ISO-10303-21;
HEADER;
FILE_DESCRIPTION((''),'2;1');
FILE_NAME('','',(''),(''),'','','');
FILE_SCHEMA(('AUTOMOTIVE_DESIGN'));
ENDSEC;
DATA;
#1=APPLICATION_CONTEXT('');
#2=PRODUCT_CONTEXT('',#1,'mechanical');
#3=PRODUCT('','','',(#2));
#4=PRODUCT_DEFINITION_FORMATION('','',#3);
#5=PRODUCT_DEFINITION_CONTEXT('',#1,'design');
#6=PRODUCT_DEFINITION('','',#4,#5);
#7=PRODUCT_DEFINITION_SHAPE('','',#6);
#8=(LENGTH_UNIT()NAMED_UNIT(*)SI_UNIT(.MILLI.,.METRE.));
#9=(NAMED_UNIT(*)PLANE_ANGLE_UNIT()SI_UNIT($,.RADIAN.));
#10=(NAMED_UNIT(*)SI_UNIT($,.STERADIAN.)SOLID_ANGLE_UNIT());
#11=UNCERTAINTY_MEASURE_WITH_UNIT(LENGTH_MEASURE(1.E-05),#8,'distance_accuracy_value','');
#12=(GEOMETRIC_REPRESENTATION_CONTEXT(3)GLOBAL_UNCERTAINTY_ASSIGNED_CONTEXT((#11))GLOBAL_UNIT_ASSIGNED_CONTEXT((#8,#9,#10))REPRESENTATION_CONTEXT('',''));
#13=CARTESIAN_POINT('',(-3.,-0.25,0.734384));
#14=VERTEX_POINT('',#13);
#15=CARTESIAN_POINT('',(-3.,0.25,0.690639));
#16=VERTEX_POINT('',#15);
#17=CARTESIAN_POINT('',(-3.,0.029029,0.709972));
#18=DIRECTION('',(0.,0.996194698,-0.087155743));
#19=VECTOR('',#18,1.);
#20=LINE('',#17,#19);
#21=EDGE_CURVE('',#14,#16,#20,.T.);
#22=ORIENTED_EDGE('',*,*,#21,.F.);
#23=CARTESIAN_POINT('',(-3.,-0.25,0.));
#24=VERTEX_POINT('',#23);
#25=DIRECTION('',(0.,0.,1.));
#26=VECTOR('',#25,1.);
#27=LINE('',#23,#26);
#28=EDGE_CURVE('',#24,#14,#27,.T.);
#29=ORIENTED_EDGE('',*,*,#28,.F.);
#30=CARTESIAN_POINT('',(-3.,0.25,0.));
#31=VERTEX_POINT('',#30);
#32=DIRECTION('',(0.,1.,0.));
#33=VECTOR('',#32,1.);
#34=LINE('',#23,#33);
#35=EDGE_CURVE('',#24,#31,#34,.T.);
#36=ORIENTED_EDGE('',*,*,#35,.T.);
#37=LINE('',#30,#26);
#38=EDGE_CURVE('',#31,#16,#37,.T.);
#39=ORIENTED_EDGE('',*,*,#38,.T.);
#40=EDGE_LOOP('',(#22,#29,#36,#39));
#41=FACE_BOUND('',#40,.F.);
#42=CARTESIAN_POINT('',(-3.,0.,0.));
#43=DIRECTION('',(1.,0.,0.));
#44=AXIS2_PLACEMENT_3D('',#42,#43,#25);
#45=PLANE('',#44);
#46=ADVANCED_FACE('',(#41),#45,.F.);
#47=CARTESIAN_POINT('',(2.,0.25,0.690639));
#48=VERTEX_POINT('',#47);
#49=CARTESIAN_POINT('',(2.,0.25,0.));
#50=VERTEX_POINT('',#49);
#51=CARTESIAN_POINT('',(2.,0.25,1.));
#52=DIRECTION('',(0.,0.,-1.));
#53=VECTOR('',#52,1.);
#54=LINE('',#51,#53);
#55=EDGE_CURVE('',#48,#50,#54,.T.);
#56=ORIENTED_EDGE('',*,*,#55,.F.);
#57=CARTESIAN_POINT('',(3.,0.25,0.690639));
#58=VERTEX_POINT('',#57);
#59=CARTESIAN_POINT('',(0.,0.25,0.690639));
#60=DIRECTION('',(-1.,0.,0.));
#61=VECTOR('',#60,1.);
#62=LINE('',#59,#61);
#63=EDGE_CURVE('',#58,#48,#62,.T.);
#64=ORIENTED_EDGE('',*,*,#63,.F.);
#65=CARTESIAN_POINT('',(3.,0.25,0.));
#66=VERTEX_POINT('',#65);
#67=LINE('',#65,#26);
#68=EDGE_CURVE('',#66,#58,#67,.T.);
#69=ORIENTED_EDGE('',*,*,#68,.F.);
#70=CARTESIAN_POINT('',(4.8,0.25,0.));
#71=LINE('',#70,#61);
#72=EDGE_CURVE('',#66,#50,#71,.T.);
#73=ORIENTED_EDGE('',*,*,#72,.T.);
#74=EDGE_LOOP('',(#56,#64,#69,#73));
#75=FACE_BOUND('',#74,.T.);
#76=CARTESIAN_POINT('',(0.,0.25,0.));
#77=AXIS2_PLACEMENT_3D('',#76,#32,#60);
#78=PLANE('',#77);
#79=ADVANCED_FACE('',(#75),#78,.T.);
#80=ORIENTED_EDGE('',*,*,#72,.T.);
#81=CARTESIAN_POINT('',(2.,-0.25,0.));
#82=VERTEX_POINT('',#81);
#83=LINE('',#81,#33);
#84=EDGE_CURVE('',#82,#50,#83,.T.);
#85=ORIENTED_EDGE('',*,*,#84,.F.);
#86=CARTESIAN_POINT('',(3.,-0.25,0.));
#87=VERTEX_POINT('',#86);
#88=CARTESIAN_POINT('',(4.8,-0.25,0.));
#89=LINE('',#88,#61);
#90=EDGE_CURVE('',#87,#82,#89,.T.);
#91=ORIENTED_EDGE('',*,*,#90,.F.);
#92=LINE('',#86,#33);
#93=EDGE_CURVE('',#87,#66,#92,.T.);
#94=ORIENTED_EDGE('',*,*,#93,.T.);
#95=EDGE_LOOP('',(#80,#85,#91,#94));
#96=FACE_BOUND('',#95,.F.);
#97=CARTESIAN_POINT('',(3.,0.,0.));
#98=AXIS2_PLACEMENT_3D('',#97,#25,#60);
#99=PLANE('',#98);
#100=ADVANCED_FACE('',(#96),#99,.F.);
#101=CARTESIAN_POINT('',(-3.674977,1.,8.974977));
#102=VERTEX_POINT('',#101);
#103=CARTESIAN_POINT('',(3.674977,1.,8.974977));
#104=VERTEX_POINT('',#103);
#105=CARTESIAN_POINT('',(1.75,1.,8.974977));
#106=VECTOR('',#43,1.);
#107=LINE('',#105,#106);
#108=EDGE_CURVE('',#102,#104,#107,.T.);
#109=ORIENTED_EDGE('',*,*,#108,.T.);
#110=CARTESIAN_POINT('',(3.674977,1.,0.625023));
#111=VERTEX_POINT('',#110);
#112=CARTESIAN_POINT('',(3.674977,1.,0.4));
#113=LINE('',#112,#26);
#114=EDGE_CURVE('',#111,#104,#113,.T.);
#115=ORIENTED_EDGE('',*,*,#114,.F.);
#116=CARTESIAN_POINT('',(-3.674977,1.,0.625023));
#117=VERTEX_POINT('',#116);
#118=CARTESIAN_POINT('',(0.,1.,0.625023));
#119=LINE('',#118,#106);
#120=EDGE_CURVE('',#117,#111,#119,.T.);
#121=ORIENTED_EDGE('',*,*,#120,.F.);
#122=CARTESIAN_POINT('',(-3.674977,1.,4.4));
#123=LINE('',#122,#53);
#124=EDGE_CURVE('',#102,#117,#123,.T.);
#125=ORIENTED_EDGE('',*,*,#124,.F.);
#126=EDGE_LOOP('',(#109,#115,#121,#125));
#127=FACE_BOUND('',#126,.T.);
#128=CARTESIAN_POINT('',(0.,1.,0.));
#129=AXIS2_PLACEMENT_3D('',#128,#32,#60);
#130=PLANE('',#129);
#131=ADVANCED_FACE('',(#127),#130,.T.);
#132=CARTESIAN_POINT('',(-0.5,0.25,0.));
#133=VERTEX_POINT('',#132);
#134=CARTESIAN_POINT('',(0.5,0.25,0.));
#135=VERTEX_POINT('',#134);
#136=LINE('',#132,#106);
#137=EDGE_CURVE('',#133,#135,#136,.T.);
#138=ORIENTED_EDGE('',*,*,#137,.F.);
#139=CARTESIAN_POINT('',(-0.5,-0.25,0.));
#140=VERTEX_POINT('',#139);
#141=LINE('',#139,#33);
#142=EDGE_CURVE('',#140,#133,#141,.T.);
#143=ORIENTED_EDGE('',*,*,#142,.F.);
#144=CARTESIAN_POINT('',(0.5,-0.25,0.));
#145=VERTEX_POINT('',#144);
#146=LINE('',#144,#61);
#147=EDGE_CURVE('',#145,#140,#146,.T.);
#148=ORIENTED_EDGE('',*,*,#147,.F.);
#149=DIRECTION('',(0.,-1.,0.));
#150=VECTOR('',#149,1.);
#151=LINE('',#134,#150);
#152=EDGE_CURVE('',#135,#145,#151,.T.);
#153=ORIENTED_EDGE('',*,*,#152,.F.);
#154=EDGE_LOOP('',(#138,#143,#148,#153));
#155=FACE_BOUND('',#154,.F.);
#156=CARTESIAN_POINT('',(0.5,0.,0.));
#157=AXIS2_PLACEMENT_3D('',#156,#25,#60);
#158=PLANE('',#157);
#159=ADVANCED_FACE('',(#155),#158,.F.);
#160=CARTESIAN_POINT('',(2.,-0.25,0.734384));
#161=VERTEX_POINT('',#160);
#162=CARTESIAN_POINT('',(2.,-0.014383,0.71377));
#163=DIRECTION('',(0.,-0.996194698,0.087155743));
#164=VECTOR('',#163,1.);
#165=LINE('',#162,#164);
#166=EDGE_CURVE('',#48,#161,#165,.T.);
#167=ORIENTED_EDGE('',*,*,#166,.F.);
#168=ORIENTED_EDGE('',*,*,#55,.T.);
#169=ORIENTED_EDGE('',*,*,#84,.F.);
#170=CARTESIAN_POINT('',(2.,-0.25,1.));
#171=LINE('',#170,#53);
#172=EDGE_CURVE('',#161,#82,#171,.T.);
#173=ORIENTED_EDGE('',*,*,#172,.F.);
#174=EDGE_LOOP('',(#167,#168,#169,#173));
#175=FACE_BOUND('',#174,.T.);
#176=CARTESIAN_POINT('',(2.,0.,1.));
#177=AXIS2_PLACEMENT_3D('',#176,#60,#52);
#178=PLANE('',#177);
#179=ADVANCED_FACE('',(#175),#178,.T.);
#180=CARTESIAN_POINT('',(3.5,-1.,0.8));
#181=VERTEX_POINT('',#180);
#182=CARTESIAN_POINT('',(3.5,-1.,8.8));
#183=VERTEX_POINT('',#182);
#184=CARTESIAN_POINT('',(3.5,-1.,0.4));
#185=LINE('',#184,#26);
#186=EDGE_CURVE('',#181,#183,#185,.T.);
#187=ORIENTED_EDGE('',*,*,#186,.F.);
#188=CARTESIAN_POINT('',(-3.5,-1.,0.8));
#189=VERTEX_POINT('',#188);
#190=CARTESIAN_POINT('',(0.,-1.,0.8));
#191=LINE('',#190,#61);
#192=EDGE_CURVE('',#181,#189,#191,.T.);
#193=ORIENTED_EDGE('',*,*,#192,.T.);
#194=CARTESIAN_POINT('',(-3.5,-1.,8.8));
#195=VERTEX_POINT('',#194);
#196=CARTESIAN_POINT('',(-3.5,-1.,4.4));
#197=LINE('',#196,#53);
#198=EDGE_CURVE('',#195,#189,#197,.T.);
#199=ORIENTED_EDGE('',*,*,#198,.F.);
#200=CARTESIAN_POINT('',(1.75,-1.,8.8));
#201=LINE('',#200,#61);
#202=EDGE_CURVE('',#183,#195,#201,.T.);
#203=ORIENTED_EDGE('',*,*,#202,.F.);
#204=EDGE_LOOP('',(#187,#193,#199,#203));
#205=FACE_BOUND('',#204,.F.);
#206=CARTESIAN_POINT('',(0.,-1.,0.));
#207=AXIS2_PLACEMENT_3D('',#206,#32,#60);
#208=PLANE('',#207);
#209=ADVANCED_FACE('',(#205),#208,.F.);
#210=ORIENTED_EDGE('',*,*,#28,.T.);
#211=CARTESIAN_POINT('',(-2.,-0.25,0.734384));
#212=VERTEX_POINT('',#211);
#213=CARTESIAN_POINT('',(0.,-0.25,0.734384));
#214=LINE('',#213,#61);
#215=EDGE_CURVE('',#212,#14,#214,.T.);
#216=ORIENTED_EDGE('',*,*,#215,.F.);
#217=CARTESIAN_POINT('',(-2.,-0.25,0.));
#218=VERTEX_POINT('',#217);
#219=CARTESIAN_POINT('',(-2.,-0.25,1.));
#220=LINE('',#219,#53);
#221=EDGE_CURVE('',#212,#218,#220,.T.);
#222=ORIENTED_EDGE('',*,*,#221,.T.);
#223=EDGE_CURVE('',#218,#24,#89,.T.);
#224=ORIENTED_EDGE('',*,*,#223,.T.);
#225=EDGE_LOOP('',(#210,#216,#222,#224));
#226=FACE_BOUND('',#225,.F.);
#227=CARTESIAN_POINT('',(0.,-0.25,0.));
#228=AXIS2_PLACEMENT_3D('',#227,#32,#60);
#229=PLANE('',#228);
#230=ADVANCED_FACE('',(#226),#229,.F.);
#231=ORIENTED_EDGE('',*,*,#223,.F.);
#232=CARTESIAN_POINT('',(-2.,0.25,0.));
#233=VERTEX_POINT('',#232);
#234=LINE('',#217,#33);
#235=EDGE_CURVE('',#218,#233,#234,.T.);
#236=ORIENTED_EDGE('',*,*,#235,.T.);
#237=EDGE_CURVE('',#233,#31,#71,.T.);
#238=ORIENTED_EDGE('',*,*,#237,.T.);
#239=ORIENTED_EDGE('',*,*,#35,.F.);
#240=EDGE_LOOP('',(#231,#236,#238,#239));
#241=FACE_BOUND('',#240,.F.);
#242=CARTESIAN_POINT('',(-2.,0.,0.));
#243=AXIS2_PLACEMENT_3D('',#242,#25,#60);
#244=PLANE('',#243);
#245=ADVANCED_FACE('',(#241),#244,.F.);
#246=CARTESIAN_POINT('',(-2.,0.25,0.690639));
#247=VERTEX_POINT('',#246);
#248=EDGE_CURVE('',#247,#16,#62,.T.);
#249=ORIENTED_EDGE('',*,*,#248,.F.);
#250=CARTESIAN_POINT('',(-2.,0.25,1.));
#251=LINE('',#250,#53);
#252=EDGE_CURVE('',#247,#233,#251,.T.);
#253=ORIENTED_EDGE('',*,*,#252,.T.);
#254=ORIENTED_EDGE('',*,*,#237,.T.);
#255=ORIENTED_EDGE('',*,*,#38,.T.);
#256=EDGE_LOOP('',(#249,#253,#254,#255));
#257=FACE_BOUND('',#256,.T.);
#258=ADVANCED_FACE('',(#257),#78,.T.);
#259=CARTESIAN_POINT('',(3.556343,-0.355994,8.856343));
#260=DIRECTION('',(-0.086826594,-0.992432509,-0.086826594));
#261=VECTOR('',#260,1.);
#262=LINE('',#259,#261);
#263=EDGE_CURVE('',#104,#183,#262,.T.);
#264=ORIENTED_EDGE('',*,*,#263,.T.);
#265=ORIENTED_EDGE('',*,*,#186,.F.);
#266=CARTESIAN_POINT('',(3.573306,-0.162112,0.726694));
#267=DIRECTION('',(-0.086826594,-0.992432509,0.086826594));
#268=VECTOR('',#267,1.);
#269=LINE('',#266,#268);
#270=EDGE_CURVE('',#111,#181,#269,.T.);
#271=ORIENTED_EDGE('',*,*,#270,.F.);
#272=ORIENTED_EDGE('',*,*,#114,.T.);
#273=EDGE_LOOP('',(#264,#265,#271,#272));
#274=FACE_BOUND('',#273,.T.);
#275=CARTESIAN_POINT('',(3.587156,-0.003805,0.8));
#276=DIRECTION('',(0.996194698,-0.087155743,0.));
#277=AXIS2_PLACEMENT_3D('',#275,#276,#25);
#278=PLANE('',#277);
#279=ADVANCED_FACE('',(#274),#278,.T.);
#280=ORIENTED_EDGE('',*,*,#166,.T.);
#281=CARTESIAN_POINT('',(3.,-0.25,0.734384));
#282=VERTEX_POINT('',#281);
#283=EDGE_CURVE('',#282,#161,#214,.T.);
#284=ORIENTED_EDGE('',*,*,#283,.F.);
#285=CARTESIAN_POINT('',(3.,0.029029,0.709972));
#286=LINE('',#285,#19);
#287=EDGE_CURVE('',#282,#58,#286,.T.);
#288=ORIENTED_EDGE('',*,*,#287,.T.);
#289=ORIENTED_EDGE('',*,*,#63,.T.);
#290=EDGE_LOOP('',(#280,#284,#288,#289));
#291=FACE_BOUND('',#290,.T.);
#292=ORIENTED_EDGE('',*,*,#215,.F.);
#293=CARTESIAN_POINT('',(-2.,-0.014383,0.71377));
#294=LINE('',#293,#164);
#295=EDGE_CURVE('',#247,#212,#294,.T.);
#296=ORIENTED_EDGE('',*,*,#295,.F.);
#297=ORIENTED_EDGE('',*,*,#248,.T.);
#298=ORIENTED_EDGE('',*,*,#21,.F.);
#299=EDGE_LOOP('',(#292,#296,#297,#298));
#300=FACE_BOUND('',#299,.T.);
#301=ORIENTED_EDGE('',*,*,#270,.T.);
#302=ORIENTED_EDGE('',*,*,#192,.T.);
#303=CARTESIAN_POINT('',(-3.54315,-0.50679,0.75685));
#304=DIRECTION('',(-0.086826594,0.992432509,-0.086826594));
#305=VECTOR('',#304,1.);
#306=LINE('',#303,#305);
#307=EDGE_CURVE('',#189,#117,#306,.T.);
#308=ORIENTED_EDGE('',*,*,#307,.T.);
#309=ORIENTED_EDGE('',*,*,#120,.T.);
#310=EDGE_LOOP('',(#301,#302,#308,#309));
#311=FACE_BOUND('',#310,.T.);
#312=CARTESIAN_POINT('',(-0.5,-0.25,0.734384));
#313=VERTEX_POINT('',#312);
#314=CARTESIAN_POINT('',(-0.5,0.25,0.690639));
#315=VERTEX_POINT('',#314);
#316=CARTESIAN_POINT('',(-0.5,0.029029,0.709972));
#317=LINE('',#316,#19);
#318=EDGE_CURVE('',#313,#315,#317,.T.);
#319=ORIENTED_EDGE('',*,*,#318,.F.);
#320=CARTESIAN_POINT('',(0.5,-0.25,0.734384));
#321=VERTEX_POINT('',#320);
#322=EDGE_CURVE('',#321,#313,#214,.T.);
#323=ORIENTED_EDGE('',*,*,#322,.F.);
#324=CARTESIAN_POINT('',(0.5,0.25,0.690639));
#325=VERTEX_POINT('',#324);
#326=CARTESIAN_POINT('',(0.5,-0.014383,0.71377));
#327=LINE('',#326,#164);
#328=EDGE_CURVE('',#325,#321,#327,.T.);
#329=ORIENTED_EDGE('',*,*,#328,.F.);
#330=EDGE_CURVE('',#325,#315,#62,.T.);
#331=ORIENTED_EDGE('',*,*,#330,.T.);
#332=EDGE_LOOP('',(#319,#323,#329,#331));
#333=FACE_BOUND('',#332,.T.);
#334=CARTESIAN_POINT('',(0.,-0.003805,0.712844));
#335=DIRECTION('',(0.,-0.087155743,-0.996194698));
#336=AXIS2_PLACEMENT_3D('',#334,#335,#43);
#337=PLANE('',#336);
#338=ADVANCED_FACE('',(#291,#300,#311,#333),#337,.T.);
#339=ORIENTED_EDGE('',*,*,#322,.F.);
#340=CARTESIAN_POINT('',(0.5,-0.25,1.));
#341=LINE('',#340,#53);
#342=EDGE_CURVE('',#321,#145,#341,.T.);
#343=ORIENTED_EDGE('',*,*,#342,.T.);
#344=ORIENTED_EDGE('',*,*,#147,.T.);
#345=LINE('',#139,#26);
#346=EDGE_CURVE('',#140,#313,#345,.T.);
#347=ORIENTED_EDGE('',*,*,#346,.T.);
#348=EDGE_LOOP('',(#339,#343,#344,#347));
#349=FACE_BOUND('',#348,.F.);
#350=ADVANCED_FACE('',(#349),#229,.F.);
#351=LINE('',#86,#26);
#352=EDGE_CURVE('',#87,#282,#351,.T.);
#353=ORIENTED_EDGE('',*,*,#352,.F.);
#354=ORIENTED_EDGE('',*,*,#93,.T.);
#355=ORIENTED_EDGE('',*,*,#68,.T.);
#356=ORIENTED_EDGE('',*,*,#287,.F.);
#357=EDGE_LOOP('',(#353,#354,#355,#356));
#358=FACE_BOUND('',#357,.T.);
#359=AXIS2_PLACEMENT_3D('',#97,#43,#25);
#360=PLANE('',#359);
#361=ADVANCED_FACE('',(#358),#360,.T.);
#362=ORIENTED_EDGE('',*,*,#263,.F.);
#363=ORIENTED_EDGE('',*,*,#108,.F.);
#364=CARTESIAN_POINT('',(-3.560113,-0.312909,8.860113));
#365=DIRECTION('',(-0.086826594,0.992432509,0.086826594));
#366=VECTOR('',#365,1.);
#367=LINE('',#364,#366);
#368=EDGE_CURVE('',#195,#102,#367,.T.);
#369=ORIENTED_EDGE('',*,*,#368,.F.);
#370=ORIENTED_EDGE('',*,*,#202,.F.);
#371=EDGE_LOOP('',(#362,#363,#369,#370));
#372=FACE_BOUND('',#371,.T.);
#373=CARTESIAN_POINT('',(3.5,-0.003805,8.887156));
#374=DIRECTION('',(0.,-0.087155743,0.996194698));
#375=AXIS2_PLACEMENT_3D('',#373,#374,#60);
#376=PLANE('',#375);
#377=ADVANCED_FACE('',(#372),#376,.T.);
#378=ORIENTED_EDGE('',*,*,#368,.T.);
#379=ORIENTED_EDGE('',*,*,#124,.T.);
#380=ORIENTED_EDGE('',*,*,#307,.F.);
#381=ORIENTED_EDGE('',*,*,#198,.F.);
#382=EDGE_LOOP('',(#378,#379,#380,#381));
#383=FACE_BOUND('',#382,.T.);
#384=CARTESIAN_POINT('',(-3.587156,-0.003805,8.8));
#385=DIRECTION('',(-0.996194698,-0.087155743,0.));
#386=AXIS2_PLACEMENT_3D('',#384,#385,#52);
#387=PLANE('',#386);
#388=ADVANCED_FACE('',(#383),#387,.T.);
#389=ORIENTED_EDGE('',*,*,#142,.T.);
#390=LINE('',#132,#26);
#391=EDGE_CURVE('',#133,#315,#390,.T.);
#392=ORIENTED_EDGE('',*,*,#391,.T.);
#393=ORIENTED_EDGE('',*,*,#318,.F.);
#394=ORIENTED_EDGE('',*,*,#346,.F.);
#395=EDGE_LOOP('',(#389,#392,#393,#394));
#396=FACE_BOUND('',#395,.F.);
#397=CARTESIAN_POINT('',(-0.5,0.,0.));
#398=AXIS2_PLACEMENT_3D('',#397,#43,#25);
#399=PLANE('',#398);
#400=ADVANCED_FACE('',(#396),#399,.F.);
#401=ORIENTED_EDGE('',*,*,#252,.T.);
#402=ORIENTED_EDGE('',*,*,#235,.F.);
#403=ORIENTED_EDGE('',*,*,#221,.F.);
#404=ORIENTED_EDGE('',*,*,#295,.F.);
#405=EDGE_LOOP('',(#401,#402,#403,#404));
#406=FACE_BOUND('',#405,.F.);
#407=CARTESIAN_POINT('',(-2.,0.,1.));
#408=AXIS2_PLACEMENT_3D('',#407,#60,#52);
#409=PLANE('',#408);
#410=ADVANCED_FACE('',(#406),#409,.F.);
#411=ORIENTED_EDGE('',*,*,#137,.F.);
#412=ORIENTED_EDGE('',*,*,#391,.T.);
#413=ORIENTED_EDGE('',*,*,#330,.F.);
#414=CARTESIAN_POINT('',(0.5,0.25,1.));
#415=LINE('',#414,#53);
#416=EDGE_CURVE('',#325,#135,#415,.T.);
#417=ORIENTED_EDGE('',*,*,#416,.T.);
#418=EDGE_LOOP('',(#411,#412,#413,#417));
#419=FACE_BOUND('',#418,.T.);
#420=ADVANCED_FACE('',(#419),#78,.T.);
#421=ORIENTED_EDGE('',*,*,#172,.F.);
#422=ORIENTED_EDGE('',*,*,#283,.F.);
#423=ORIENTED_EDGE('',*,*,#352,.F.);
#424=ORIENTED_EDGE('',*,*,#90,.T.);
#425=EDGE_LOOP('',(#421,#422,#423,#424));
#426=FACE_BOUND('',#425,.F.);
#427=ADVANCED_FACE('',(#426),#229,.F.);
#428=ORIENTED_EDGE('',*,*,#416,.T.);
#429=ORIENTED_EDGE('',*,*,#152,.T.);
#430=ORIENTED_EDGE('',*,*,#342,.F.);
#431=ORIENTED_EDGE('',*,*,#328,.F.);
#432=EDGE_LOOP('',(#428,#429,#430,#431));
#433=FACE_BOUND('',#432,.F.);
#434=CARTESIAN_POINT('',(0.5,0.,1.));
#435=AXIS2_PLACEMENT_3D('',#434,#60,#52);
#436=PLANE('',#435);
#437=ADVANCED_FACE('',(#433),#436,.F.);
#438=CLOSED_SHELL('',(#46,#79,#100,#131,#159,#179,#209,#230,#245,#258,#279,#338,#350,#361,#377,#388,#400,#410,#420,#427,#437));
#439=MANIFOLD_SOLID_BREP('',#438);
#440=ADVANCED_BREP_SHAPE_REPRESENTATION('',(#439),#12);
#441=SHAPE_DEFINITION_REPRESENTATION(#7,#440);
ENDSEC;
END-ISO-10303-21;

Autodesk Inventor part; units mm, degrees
ref_plane "YZ Plane" through (0, 0, 0) normal (1, 0, 0) x (0, 1, 0)
ref_plane "XZ Plane" through (0, 0, 0) normal (0, 1, 0) x (-1, 0, 0)
ref_plane "XY Plane" through (0, 0, 0) normal (0, 0, 1) x (1, 0, 0)
sketch "Sketch2" plane through (0, 0, 0) normal (0, 1, 0) x (-1, 0, 0)
  line L0 (0, -0.1) -> (0, 1.3) projected
  line L1 (-4.8, 0) -> (3.6, 0) projected
  line L2 (-0.5, 0) -> (0.5, 0)
  line L3 (0.5, 0) -> (0.5, 1)
  line L4 (0.5, 1) -> (-0.5, 1)
  line L5 (-0.5, 1) -> (-0.5, 0)
  line L6 (2, 0) -> (3, 0)
  line L7 (3, 0) -> (3, 1)
  line L8 (3, 1) -> (2, 1)
  line L9 (2, 1) -> (2, 0)
  line L10 (-2, 0) -> (-3, 0)
  line L11 (-3, 0) -> (-3, 1)
  line L12 (-3, 1) -> (-2, 1)
  line L13 (-2, 1) -> (-2, 0)
  dimension "d0" = 6
  dimension "d1" = 1
  dimension "d2" = 1
extrude "Extrusion1" add sketch "Sketch2" along normal mid plane 0.5
sketch "Sketch3" plane through (0, 0, 0) normal (0, 1, 0) x (-1, 0, 0)
  line L0 (0, -1.18) -> (0, 15.34) projected
  line L1 (-0.5, 1) -> (0.5, 1) projected
  line L2 (-3.5, 8.8) -> (3.5, 8.8)
  line L3 (3.5, 8.8) -> (3.5, 0.8)
  line L4 (3.5, 0.8) -> (-3.5, 0.8)
  line L5 (-3.5, 0.8) -> (-3.5, 8.8)
  point P0 (0, 0)
  dimension "d5" = 0.2
  dimension "d6" = 8
  dimension "d7" = 7
extrude "Extrusion2" add sketch "Sketch3" along normal mid plane 2
draft "FaceDraft1" angle 5 pull direction (0, -1, 0) faces at (3.5, 0.3333, 6.1333) (-0.1667, 0.75, 0.8) (-3.5, -0.3333, 6.1333) (-1.1667, 0.3333, 8.8) fixed edges at (3.5, -1, 4.8) (0, -1, 0.8) (-3.5, -1, 4.8) (0, -1, 8.8)
properties part number "config - chip stand"
